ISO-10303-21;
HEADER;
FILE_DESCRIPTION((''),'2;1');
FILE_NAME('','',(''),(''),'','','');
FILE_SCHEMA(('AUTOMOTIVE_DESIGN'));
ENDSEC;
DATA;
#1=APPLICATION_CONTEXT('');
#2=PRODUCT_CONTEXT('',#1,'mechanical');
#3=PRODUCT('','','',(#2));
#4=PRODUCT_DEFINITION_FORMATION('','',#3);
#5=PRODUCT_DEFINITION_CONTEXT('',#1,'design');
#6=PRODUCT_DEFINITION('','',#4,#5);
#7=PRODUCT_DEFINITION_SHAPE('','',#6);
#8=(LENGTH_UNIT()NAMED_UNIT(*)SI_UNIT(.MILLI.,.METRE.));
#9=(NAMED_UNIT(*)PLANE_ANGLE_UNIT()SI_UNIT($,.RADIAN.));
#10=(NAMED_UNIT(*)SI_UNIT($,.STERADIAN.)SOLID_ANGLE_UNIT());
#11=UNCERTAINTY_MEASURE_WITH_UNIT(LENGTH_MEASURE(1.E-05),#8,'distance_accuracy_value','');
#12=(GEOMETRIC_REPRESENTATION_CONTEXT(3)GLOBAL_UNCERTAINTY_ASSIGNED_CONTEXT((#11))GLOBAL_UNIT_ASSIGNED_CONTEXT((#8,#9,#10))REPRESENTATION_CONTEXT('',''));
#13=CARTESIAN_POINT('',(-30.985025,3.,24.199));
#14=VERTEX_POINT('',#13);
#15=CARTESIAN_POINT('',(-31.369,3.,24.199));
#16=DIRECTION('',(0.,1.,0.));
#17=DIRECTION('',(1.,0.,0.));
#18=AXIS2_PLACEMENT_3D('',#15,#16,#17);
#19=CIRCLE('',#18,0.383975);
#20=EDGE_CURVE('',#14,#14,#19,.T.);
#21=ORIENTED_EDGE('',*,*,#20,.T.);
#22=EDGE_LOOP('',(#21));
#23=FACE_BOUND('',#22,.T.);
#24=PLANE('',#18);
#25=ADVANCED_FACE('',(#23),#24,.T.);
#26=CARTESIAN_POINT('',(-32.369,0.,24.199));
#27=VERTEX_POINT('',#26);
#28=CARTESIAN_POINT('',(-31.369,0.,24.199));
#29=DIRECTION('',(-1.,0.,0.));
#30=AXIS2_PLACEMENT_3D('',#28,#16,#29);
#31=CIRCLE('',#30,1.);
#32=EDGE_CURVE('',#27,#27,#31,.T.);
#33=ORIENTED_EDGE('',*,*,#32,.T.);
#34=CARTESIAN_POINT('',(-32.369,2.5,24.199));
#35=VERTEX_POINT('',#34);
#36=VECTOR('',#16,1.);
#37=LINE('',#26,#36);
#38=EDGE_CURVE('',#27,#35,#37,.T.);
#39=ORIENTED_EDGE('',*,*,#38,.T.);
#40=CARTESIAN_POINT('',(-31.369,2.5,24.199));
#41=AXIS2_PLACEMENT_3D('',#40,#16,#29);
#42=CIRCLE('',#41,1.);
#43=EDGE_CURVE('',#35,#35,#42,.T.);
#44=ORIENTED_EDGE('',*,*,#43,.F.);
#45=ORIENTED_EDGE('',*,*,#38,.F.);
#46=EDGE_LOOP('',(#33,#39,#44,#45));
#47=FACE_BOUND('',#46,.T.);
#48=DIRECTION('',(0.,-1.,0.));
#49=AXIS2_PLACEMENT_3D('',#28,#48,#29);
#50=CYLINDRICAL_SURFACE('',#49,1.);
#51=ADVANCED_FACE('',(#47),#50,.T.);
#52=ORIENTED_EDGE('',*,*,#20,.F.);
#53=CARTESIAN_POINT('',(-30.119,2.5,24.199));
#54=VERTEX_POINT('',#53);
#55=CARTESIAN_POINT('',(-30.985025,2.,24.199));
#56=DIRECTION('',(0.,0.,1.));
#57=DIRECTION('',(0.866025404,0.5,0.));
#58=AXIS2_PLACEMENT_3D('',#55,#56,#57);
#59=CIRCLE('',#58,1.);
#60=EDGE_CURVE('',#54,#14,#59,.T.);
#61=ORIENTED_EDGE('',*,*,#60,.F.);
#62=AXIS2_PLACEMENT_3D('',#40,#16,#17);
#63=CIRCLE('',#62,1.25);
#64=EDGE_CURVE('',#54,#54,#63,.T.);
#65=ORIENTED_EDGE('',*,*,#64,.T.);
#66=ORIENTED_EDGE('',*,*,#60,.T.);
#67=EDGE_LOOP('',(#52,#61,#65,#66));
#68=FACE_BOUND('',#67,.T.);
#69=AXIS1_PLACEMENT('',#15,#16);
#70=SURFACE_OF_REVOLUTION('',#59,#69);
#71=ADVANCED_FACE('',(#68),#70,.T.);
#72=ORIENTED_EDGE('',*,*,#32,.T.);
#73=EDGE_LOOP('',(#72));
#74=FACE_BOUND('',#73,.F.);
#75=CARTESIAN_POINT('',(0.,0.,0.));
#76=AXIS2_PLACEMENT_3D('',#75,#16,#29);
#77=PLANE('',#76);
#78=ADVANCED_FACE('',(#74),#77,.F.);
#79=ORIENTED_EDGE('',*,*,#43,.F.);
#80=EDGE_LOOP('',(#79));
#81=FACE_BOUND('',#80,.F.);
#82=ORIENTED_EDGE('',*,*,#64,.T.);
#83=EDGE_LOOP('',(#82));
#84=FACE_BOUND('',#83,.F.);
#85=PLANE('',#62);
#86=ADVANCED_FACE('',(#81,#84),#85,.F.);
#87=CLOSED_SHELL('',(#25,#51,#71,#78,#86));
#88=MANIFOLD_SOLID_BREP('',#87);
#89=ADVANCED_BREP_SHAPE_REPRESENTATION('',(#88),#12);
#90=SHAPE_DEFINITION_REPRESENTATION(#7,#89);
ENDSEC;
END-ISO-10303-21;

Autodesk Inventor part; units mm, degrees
ref_plane "YZ Plane" through (0, 0, 0) normal (1, 0, 0) x (0, 1, 0)
ref_plane "XZ Plane" through (0, 0, 0) normal (0, 1, 0) x (-1, 0, 0)
ref_plane "XY Plane" through (0, 0, 0) normal (0, 0, 1) x (1, 0, 0)
sketch "Sketch1" plane through (0, 0, 0) normal (0, 1, 0) x (-1, 0, 0)
  circle A0 centre (31.369, 24.199) radius 1
  point P0 (0, 0)
  dimension "d0" = 2
extrude "Extrusion1" add sketch "Sketch1" along normal blind 2.5
thread "Thread1" size "M2x0.4" class "6g" standard "ANSI Metric M Profile" full length
sketch "Sketch2" plane through (-31.369, 2.5, 24.199) normal (0, 1, 0) x (1, 0, 0)
  circle A0 centre (0, 0) radius 1.25
  point P0 (31.369, 24.199)
  dimension "d5" = 2.5
extrude "Extrusion2" add sketch "Sketch2" along normal blind 0.5
fillet "Fillet1" radius 1 1 edges at (-32.619, 3, 24.199)
properties part number "screwSmall"
